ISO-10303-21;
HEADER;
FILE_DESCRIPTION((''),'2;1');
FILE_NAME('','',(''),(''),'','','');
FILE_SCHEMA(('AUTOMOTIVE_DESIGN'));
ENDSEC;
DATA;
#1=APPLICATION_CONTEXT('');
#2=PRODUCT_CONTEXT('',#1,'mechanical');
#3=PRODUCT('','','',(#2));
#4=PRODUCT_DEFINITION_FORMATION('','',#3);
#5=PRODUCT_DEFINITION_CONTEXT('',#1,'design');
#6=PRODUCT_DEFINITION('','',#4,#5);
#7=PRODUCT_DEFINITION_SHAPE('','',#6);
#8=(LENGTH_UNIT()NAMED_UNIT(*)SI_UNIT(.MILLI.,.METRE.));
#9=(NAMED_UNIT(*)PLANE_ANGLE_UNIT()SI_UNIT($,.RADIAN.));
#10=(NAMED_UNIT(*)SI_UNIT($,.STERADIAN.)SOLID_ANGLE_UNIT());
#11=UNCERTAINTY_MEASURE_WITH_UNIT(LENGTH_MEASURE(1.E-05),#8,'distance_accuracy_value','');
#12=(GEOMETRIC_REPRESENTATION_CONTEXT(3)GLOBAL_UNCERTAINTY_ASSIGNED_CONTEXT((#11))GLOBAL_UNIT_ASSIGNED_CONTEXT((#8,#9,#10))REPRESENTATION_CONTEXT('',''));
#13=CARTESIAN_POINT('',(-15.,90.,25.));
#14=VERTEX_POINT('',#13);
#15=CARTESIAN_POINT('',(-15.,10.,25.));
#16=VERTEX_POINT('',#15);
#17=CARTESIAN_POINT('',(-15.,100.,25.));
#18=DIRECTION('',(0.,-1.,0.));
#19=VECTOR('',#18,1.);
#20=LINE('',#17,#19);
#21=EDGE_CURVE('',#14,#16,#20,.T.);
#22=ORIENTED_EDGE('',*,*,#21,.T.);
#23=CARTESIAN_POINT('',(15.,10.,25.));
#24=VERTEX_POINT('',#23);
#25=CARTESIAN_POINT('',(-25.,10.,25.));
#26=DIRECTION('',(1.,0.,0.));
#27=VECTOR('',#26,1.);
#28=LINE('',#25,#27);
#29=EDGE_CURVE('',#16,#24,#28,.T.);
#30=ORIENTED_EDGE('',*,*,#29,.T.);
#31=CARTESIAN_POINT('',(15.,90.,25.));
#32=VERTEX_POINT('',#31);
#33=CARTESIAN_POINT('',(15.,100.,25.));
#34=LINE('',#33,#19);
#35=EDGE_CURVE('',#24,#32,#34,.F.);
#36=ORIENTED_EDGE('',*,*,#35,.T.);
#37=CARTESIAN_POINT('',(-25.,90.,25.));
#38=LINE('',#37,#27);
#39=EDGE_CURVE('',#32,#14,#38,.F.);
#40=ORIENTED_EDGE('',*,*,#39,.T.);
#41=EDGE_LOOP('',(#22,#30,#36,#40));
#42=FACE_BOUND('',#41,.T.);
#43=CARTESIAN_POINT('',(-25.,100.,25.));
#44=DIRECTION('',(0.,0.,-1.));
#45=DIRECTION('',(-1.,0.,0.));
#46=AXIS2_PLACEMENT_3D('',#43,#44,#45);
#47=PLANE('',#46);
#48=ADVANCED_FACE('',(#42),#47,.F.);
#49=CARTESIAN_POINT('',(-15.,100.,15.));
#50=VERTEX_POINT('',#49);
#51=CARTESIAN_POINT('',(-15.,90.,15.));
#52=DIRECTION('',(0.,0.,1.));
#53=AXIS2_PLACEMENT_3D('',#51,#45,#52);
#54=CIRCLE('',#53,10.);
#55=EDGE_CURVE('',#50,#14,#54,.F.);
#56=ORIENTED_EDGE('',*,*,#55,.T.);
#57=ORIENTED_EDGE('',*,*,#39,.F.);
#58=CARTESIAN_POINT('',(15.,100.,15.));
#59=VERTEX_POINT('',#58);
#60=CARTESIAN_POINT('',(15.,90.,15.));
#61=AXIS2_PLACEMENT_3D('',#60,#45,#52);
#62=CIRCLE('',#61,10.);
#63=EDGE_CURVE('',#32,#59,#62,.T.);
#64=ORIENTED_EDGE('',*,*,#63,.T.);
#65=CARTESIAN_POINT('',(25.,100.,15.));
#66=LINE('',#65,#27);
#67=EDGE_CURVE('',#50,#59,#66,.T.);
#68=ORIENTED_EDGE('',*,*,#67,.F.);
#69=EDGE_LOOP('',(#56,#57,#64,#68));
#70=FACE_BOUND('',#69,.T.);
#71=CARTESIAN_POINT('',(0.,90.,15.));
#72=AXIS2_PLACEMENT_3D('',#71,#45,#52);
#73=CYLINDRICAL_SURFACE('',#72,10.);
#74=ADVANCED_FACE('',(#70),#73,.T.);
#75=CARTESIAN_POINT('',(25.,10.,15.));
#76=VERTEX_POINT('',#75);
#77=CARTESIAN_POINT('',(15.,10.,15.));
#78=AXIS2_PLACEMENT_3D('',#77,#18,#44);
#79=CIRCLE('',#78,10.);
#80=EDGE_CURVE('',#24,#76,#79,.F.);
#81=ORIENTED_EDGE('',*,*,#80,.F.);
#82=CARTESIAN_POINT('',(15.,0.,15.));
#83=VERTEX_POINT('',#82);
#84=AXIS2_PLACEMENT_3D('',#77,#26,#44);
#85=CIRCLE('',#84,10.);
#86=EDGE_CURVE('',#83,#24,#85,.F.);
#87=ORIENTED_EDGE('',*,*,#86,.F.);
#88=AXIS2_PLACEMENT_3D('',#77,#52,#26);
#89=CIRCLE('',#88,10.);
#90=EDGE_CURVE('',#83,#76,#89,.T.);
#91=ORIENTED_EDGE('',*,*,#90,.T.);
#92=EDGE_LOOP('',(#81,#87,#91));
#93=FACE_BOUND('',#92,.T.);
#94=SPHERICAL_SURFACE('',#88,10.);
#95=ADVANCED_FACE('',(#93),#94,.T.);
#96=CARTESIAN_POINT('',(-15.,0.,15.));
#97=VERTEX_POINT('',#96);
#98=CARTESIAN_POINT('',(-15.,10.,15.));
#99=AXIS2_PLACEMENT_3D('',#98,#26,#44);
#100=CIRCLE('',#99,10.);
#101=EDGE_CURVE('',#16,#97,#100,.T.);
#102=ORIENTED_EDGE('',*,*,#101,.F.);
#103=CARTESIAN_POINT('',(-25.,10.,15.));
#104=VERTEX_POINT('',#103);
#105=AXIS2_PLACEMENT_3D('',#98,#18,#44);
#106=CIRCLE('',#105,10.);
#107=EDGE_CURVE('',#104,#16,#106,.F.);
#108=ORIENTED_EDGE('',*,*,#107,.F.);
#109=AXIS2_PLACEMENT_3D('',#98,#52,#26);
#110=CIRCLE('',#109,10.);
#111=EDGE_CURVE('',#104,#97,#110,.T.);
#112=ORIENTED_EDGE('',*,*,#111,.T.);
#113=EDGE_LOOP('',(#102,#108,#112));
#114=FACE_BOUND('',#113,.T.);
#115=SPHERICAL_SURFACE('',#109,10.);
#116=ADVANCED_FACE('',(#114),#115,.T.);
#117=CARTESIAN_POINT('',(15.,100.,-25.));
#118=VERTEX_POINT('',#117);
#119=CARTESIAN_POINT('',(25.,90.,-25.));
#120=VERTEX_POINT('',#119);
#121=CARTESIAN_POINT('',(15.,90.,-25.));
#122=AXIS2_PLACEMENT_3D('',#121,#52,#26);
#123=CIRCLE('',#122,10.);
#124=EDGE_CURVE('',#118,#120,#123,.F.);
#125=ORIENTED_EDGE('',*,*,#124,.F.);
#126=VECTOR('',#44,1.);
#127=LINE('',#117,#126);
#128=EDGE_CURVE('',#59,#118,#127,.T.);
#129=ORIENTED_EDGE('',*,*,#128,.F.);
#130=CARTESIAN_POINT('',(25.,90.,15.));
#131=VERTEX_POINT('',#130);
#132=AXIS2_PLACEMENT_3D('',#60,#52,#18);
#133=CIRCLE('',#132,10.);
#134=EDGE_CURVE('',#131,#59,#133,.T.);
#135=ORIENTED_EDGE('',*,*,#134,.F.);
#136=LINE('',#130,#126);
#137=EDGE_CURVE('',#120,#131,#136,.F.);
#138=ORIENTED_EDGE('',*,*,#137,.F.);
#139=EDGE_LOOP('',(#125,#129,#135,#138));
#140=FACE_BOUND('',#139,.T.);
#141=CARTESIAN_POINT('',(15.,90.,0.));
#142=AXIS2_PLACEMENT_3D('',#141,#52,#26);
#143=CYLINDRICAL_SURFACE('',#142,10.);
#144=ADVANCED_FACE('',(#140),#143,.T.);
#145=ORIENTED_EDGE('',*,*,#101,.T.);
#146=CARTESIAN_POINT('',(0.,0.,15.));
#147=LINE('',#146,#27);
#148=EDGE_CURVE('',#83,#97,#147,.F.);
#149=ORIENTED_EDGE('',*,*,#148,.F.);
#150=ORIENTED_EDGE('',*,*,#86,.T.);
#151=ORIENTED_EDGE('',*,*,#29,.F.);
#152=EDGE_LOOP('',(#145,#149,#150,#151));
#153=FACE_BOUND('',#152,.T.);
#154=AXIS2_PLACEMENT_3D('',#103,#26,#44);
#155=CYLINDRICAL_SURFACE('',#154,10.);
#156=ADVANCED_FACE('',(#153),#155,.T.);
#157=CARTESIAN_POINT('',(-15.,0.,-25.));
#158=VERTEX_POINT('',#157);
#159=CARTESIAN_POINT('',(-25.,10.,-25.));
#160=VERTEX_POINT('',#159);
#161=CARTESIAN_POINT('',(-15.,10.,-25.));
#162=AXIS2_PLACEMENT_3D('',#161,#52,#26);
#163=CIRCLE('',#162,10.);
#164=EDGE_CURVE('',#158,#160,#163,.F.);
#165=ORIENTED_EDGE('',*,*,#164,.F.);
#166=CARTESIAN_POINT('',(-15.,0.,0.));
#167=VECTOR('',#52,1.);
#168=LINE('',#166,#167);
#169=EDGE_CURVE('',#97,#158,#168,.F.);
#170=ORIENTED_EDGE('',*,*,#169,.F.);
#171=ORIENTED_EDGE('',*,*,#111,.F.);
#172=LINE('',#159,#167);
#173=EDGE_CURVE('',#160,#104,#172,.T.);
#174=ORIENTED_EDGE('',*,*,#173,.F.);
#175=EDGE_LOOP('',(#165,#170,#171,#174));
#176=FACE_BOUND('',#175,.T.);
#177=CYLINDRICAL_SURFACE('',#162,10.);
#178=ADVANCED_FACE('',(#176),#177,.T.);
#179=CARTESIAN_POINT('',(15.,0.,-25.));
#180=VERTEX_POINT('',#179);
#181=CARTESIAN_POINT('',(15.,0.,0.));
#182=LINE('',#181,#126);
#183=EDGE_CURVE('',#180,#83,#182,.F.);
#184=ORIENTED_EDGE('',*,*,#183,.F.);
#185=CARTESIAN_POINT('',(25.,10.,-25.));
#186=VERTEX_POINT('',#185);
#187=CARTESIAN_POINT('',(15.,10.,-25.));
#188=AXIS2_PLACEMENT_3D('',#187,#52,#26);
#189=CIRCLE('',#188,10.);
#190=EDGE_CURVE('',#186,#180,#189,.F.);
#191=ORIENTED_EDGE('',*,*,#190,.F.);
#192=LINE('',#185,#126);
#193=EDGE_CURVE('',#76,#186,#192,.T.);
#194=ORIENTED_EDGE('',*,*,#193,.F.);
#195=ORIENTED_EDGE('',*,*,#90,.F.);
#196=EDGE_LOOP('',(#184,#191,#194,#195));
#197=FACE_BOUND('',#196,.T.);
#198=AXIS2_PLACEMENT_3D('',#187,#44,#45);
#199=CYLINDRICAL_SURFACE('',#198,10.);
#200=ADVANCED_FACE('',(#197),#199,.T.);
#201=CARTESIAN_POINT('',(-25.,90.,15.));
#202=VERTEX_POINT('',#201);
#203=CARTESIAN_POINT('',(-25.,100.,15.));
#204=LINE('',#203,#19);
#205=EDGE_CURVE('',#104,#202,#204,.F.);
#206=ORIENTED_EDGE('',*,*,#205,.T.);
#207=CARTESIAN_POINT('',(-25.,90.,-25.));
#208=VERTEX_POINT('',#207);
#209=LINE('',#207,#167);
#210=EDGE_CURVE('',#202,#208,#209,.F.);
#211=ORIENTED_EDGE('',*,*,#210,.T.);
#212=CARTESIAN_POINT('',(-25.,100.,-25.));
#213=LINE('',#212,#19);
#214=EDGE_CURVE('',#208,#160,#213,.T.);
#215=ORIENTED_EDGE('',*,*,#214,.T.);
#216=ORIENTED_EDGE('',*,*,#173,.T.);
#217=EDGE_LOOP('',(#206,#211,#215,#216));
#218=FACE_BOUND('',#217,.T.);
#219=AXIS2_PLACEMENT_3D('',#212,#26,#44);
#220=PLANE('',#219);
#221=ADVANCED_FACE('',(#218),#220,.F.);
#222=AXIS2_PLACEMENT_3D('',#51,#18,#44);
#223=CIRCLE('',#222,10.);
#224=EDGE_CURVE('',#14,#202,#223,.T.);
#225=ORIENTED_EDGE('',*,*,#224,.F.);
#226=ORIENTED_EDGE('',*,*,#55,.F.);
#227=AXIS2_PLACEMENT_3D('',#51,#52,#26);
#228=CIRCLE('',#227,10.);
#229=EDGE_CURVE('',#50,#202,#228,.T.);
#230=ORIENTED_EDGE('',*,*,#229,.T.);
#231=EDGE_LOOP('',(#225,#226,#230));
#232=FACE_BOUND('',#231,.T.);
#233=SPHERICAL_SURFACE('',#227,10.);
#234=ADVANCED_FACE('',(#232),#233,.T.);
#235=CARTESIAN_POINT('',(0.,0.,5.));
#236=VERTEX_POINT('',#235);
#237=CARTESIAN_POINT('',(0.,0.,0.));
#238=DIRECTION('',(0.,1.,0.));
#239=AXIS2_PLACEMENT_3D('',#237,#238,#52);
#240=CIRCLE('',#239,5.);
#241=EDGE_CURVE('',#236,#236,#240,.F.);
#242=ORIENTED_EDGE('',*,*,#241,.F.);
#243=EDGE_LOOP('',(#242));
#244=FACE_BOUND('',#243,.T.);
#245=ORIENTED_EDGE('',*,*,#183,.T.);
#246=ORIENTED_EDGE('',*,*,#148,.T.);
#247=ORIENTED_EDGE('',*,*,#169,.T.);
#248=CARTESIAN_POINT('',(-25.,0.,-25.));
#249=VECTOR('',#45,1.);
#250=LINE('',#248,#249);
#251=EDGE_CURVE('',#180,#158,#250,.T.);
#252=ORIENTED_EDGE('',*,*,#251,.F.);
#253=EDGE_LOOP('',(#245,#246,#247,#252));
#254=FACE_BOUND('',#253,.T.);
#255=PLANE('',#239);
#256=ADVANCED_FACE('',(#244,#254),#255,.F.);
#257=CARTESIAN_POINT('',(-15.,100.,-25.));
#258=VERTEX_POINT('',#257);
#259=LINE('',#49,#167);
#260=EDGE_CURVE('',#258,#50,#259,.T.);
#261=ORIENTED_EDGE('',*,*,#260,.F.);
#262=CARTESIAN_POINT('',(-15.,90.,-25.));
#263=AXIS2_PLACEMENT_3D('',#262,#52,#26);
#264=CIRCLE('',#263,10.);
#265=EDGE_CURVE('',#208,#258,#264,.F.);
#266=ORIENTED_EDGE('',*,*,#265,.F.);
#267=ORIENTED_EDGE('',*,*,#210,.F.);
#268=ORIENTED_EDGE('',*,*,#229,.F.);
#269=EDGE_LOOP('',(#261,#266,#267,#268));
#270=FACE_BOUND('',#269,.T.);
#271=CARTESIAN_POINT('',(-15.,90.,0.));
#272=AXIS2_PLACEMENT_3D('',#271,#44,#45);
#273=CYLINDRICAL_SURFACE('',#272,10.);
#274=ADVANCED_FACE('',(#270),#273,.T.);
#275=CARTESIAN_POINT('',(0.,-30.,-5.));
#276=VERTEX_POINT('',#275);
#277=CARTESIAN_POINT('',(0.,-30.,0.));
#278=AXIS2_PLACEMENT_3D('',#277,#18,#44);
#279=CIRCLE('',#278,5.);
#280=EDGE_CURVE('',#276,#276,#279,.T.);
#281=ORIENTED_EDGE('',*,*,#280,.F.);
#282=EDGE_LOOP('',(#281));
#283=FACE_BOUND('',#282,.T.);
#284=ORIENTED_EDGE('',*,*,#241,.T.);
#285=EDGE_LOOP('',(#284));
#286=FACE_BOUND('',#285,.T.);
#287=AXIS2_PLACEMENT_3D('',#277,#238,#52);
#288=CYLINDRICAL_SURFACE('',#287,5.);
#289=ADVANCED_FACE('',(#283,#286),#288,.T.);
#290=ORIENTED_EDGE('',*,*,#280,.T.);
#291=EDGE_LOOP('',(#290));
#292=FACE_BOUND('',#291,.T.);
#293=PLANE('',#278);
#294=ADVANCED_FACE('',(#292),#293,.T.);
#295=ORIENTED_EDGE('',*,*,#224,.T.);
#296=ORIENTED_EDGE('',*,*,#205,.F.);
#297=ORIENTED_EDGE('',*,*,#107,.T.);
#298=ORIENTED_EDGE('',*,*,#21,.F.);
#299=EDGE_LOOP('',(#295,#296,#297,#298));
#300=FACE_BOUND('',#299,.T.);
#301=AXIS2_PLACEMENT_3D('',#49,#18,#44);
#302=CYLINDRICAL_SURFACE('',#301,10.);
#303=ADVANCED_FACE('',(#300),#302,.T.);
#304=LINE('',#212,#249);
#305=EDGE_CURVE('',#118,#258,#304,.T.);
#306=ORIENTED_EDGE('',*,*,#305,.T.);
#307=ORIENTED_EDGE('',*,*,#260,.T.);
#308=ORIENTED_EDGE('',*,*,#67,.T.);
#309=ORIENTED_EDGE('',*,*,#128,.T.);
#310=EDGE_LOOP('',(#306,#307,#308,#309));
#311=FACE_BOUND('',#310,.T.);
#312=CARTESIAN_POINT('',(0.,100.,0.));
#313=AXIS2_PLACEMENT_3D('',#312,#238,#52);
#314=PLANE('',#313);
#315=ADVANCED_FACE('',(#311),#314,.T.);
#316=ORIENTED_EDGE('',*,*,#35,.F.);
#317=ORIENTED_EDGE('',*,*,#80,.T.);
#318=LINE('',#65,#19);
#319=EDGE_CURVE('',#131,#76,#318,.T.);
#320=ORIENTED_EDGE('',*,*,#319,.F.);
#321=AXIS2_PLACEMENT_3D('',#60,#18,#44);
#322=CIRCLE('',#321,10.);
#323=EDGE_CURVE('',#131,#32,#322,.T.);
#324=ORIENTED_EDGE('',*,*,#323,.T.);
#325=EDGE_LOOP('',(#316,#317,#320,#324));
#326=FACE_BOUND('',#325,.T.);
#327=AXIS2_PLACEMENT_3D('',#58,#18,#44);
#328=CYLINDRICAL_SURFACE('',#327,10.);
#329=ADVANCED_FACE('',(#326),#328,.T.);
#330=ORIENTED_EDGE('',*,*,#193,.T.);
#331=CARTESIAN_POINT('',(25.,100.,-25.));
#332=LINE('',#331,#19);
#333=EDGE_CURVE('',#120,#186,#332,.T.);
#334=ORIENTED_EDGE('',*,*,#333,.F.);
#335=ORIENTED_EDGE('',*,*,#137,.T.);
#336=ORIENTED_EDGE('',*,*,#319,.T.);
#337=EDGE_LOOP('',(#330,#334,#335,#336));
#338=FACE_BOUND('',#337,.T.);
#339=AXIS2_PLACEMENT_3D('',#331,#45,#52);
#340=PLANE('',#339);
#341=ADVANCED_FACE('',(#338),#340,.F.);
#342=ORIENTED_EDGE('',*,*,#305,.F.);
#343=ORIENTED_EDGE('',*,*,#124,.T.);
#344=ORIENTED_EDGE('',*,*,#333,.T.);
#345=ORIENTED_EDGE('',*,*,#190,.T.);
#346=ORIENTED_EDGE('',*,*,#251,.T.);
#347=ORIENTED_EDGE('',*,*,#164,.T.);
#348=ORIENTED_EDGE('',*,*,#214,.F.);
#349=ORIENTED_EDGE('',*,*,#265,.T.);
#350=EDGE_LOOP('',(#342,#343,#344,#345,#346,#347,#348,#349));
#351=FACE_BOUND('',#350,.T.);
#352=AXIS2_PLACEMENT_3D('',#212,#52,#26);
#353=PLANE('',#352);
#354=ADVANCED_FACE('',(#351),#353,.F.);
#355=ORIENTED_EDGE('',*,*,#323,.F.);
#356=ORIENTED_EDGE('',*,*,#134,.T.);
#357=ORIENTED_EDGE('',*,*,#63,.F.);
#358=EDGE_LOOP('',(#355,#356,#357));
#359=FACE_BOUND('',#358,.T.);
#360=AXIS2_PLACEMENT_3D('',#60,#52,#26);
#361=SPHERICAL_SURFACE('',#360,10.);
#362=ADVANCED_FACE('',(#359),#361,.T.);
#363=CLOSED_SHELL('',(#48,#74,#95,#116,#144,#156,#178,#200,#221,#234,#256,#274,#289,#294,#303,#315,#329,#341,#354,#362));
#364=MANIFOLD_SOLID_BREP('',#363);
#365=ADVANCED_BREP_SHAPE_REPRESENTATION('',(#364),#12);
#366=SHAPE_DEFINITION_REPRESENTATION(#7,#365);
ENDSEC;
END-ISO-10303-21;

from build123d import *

# Parameters (mm, degrees)
SKETCH1_W           = 50
SKETCH1_H           = 50
BOSS_EXTRUDE1_DEPTH = 100
SKETCH2_R           = 5
BOSS_EXTRUDE2_DEPTH = 30
FILLET1_R           = 10
FILLET2_R           = 10


with BuildPart() as part:
    # Sketch1 → Boss-Extrude1 (new body)
    with BuildSketch(Plane(origin=(0, 0, 0), x_dir=(1, 0, 0), z_dir=(0, 1, 0))):
        Rectangle(SKETCH1_W, SKETCH1_H)
    extrude(amount=BOSS_EXTRUDE1_DEPTH)

    # Sketch2 → Boss-Extrude2 (add)
    with BuildSketch(Plane.XZ):
        with Locations(Location((0, 0, 0), (0, 0, 90))):
            Circle(SKETCH2_R)
    extrude(amount=BOSS_EXTRUDE2_DEPTH)

    # Fillet1
    fillet1_edges = [part.edges().sort_by_distance(p)[0] for p in [
        (0, 100, 25),
        (0, 0, 25),
        (25, 50, 25),
        (-25, 50, 25),
    ]]
    fillet(fillet1_edges, radius=FILLET1_R)

    # Fillet2
    # the kernel refuses this fillet: 10 mm, written as the material it takes off along each edge
    with BuildSketch(Plane(origin=(-15, 90, 15), x_dir=(0, 1, 0), z_dir=(-1, 0, 0))) as fillet2_piece_1_section:
        Polygon((0, 0), (FILLET2_R, 0), (FILLET2_R, -FILLET2_R), (0, -FILLET2_R), align=None)
    fillet2_piece_1 = extrude(amount=FILLET2_R, mode=Mode.PRIVATE)
    fillet2_piece_1 = fillet2_piece_1 - Plane(origin=(-15, 90, 15), x_dir=(0, -0.7071067811865475, -0.7071067811865475), z_dir=(-1, 0, 0)) * Sphere(FILLET2_R, mode=Mode.PRIVATE)
    add(fillet2_piece_1, mode=Mode.SUBTRACT)
    with BuildSketch(Plane(origin=(15, 90, 15), x_dir=(1, 0, 0), z_dir=(0, 1, 0))) as fillet2_piece_2_section:
        Polygon((0, 0), (FILLET2_R, 0), (FILLET2_R, -FILLET2_R), (0, -FILLET2_R), align=None)
    fillet2_piece_2 = extrude(amount=FILLET2_R, mode=Mode.PRIVATE)
    fillet2_piece_2 = fillet2_piece_2 - Plane(origin=(15, 90, 15), x_dir=(-0.7071067811865475, 0, -0.7071067811865475), z_dir=(0, 1, 0)) * Sphere(FILLET2_R, mode=Mode.PRIVATE)
    add(fillet2_piece_2, mode=Mode.SUBTRACT)
    with BuildSketch(Plane(origin=(-15, 10, 15), x_dir=(0, -1, 0), z_dir=(-1, 0, 0))) as fillet2_piece_3_section:
        Polygon((0, 0), (FILLET2_R, 0), (FILLET2_R, FILLET2_R), (0, FILLET2_R), align=None)
    fillet2_piece_3 = extrude(amount=FILLET2_R, mode=Mode.PRIVATE)
    fillet2_piece_3 = fillet2_piece_3 - Plane(origin=(-15, 10, 15), x_dir=(0, 0.7071067811865475, -0.7071067811865475), z_dir=(-1, 0, 0)) * Sphere(FILLET2_R, mode=Mode.PRIVATE)
    add(fillet2_piece_3, mode=Mode.SUBTRACT)
    with BuildSketch(Plane(origin=(15, 10, 15), x_dir=(1, 0, 0), z_dir=(0, -1, 0))) as fillet2_piece_4_section:
        Polygon((0, 0), (FILLET2_R, 0), (FILLET2_R, FILLET2_R), (0, FILLET2_R), align=None)
    fillet2_piece_4 = extrude(amount=FILLET2_R, mode=Mode.PRIVATE)
    fillet2_piece_4 = fillet2_piece_4 - Plane(origin=(15, 10, 15), x_dir=(-0.7071067811865475, 0, -0.7071067811865475), z_dir=(0, -1, 0)) * Sphere(FILLET2_R, mode=Mode.PRIVATE)
    add(fillet2_piece_4, mode=Mode.SUBTRACT)
    with BuildSketch(Plane(origin=(-25, 100, 15), x_dir=(0, -1, 0), z_dir=(0, 0, -1)), Plane(origin=(25, 0, -50), x_dir=(-1, 0, 0), z_dir=(0, 0, 1))) as fillet2_piece_5:
        with BuildLine():
            CenterArc((FILLET2_R, -FILLET2_R), FILLET2_R, 90, 90)
            Line((0, -FILLET2_R), (0, 0))
            Line((0, 0), (FILLET2_R, 0))
        make_face()
    extrude(amount=65, mode=Mode.SUBTRACT)
    with BuildSketch(Plane(origin=(25, 100, -50), x_dir=(-1, 0, 0), z_dir=(0, 0, 1)), Plane(origin=(-25, 0, 15), x_dir=(0, 1, 0), z_dir=(0, 0, -1))) as fillet2_piece_6:
        with BuildLine():
            CenterArc((FILLET2_R, FILLET2_R), FILLET2_R, 180, 90)
            Line((0, FILLET2_R), (0, 0))
            Line((0, 0), (FILLET2_R, 0))
        make_face()
    extrude(amount=65, mode=Mode.SUBTRACT)


solid = part.part
